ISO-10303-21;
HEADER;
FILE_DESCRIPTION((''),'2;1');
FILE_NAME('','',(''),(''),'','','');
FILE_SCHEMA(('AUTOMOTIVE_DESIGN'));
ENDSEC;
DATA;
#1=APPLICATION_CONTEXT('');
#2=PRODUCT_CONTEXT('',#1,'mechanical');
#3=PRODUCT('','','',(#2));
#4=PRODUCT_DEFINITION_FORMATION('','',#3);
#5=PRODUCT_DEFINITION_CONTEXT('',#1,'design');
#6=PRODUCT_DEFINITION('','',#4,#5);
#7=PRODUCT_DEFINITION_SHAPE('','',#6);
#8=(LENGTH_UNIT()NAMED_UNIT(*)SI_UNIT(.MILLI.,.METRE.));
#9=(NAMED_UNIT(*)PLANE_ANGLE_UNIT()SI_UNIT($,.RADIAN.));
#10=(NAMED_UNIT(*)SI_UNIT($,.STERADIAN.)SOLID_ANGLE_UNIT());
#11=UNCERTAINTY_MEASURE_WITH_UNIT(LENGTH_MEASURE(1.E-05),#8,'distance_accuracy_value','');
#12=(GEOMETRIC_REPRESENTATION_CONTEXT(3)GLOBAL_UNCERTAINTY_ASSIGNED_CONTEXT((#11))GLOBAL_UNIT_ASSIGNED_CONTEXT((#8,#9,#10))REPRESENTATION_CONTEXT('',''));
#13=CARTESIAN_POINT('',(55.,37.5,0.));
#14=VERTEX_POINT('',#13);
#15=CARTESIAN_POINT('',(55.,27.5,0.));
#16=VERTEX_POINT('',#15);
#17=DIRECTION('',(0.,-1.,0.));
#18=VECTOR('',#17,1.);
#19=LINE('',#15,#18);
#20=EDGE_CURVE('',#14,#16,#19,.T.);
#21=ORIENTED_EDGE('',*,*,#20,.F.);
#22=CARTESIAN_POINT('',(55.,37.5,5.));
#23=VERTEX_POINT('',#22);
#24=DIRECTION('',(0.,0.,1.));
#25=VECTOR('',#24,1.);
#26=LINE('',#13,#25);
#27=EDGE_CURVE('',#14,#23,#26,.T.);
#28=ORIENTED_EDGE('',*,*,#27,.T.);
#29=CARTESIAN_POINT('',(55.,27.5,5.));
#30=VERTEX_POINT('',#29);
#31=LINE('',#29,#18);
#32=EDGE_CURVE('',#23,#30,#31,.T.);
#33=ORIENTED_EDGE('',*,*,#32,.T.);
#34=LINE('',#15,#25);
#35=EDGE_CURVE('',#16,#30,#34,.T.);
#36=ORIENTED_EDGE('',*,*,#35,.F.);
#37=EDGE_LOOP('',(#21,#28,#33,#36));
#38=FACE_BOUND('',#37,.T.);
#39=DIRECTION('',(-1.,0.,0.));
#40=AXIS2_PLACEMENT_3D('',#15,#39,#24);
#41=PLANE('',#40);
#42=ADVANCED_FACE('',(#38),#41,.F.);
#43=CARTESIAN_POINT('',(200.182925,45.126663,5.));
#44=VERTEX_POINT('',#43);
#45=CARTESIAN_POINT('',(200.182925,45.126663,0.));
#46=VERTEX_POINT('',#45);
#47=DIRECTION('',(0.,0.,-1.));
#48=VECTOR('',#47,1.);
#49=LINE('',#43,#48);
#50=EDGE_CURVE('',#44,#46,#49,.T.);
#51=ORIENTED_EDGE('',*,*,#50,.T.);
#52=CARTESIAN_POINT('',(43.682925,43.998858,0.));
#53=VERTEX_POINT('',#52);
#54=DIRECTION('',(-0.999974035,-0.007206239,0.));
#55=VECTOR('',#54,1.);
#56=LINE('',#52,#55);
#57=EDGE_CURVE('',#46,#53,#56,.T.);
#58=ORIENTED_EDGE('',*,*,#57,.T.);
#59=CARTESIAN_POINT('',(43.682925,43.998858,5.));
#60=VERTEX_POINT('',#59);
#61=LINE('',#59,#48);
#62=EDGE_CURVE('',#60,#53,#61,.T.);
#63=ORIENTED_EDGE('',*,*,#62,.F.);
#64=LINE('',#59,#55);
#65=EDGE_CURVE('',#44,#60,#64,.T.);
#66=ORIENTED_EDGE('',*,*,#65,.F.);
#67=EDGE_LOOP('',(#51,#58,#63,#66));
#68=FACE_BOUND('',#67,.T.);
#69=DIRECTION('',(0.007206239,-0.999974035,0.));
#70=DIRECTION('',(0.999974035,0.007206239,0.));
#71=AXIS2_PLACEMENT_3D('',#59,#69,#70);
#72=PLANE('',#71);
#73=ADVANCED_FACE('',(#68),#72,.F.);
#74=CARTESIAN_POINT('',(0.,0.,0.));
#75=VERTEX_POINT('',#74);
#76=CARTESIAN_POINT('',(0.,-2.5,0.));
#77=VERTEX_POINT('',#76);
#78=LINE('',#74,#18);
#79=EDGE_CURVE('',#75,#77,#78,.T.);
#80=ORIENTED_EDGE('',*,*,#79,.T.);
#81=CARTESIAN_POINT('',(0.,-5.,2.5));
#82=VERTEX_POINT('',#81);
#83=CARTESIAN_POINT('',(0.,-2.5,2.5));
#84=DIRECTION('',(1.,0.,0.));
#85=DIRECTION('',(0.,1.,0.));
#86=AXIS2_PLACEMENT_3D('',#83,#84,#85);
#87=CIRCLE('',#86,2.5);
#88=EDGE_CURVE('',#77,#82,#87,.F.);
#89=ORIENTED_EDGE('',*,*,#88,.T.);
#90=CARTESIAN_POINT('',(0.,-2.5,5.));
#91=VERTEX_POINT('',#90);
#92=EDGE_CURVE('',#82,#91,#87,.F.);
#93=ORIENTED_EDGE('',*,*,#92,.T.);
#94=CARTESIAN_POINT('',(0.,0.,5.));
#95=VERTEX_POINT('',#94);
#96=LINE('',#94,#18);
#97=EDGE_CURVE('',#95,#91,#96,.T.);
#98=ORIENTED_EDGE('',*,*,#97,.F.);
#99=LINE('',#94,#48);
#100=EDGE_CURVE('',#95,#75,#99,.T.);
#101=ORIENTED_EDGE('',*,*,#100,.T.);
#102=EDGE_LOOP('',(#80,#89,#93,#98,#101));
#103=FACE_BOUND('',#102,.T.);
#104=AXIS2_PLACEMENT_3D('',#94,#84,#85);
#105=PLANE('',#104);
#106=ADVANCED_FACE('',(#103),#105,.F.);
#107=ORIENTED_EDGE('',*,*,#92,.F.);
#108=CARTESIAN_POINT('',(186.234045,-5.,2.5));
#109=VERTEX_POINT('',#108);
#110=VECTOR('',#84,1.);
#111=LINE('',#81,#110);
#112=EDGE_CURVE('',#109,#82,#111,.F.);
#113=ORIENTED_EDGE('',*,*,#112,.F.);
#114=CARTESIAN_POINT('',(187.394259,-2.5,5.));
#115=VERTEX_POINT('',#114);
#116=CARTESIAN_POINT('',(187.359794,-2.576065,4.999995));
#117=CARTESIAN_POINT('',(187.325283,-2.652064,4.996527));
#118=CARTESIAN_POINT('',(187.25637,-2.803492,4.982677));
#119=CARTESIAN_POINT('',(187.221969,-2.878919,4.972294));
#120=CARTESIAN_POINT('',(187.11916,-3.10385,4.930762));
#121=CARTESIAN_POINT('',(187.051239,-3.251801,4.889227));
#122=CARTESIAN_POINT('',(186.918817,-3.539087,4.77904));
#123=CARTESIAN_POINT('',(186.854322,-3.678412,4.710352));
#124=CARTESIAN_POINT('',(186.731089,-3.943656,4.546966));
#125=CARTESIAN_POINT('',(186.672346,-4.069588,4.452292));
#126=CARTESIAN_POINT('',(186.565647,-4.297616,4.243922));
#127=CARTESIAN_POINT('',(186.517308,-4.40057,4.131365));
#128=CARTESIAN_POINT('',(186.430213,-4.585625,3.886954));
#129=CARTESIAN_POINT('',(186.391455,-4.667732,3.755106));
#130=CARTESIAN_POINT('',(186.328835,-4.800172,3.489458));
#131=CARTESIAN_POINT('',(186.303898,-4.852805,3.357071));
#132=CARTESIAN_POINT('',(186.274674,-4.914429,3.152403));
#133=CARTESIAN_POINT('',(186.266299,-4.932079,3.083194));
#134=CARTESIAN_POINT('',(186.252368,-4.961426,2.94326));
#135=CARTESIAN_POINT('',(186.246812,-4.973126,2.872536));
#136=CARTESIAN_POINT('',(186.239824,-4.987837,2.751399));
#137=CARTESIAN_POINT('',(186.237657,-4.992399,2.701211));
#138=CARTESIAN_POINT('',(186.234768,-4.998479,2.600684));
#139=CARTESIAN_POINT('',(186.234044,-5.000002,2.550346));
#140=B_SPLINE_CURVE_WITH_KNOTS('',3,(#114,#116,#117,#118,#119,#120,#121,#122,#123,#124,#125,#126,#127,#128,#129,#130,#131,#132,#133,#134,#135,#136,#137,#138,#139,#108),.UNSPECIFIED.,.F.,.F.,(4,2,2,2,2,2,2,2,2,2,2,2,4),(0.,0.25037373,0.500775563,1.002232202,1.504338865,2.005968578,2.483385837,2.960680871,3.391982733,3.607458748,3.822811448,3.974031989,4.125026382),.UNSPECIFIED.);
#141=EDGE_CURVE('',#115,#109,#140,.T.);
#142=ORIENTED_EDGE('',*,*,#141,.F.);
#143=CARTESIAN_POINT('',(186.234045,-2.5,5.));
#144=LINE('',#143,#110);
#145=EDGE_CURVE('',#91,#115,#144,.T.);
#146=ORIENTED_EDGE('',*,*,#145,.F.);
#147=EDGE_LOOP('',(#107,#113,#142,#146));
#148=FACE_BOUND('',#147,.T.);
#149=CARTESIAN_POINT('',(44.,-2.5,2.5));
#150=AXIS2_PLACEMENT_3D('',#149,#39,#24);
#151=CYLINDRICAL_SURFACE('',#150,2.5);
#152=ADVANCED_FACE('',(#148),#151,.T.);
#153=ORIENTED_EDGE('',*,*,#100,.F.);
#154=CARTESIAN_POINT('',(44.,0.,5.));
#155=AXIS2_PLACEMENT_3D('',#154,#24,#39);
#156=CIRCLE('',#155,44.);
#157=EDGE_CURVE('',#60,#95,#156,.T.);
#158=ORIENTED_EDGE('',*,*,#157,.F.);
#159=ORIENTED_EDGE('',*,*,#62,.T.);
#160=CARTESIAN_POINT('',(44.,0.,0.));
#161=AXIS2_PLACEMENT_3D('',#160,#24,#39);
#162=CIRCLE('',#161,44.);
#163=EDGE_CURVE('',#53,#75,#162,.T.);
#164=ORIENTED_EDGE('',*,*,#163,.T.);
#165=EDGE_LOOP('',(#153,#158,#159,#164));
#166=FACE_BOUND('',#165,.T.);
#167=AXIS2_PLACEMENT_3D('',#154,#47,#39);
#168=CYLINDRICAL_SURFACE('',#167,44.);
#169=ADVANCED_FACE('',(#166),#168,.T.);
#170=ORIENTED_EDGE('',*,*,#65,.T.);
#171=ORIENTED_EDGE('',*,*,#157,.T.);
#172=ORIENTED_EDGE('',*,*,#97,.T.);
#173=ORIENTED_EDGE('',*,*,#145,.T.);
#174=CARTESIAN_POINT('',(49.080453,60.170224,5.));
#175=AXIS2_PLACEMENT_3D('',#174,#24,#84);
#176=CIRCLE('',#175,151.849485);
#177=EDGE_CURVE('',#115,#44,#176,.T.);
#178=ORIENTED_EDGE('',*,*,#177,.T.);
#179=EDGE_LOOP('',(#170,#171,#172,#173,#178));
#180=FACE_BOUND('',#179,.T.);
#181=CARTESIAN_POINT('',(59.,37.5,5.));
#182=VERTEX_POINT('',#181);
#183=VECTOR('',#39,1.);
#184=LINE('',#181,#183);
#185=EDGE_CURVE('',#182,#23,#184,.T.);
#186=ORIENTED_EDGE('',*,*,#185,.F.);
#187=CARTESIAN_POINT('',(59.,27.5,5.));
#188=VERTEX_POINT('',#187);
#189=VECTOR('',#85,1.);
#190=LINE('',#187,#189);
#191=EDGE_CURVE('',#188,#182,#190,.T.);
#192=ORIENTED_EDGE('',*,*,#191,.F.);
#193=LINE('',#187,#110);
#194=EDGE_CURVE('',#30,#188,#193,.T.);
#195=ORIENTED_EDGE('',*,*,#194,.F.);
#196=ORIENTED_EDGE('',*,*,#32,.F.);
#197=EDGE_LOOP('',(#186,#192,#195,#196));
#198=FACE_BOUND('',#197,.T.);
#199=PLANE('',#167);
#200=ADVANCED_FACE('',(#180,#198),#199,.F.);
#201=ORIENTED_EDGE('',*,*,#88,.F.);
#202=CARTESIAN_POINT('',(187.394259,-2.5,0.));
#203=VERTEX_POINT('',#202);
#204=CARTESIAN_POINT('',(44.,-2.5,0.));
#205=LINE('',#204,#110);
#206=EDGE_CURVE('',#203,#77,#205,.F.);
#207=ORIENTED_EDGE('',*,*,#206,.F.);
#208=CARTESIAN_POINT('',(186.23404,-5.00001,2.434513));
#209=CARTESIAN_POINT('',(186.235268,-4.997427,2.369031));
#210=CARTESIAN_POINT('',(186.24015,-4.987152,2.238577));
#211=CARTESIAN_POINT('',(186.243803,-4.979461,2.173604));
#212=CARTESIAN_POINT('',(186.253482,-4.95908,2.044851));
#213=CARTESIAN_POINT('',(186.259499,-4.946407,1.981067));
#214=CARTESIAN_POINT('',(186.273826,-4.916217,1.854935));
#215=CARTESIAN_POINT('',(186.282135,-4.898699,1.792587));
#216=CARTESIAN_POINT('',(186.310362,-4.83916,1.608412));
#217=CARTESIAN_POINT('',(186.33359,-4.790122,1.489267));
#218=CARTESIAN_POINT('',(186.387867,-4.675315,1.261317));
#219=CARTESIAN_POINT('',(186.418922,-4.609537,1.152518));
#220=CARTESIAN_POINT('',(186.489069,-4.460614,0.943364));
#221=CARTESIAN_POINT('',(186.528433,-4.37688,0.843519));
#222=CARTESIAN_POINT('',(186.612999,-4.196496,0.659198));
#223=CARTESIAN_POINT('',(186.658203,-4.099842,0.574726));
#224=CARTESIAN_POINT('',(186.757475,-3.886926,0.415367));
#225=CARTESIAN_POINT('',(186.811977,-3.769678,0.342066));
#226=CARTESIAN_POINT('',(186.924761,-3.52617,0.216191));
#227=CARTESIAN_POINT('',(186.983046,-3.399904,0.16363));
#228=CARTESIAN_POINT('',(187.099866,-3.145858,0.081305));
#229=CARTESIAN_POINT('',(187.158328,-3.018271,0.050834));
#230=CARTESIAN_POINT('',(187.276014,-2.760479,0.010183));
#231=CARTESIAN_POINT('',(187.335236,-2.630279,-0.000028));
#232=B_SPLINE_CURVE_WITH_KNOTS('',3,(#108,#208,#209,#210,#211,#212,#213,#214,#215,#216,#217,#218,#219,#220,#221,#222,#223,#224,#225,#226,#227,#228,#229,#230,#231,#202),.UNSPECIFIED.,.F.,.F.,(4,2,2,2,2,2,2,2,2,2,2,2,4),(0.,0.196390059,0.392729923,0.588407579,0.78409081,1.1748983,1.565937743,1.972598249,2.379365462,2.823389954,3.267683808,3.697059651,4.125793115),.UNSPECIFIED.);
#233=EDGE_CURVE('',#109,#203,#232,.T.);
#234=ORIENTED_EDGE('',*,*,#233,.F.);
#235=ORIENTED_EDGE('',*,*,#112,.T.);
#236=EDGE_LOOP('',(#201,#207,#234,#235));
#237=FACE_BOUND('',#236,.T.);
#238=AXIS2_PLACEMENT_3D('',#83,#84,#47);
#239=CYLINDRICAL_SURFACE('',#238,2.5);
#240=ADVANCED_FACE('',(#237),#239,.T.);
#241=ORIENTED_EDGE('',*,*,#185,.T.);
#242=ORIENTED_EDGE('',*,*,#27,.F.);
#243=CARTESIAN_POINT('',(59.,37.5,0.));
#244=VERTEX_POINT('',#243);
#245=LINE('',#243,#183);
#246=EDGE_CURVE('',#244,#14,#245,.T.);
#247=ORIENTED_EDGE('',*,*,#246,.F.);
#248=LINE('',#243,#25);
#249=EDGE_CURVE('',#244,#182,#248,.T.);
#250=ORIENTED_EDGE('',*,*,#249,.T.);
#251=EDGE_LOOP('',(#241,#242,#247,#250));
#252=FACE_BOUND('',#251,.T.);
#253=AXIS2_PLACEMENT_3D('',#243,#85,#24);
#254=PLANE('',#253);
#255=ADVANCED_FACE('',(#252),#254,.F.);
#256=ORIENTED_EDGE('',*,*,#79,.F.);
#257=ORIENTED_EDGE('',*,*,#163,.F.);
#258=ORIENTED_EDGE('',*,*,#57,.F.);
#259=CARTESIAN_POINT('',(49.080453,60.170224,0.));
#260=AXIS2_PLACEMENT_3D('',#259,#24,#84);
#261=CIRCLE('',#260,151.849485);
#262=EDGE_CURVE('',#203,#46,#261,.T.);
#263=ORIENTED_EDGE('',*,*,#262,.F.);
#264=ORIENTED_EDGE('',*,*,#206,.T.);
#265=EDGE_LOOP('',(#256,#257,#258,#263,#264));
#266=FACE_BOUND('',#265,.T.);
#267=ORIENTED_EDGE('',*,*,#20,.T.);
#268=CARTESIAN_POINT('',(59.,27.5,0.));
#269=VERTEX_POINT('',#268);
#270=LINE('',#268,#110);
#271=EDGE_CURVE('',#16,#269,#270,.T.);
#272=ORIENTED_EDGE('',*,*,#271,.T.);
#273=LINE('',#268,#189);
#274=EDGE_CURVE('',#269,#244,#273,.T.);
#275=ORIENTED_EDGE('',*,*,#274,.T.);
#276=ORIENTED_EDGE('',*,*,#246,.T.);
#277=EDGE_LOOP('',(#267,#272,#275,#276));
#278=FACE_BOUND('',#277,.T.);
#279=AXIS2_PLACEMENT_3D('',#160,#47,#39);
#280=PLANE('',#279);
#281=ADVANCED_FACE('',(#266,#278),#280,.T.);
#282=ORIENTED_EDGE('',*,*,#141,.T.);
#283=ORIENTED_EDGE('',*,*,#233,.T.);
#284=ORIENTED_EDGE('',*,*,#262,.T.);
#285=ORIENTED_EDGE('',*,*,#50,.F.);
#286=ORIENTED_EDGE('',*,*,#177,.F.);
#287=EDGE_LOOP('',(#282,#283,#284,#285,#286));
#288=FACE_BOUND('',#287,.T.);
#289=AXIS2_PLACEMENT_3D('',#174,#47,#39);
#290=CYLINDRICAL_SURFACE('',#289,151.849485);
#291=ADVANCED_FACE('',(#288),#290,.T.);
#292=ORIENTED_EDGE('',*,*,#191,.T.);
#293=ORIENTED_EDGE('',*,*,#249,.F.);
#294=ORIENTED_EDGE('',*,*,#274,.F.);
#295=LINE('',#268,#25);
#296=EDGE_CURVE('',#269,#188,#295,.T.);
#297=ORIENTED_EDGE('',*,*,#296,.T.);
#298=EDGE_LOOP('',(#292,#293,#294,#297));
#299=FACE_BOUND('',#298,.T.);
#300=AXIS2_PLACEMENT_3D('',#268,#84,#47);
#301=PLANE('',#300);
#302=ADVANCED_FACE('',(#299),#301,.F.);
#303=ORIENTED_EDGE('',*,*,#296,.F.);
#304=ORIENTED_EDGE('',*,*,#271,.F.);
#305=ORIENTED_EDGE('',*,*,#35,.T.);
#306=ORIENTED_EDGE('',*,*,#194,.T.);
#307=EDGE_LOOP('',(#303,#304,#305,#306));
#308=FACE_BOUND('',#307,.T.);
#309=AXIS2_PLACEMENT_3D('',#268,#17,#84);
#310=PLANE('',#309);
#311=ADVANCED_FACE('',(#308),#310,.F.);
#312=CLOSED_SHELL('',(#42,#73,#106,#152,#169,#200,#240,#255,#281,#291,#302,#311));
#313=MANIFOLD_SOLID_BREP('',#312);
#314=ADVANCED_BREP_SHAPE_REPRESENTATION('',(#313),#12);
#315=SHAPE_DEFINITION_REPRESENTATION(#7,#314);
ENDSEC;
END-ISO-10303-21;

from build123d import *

# Parameters (mm, degrees)
BOSS_EXTRU_1_DEPTH      = 5
ESQUISSE3_W             = 10
ESQUISSE3_H             = 3
ENL_V_MAT_EXTRU_1_DEPTH = 231.967242256
ENL_V_MAT_EXTRU_2_DEPTH = 231.967242256
ESQUISSE2_W             = 203.424903091
ESQUISSE2_H             = 131.549645995
ENL_V_MAT_EXTRU_3_DEPTH = 231.967242256
CONG_1_R                = 2.5
ESQUISSE5_W             = 4
ESQUISSE5_H             = 10
ENL_V_MAT_EXTRU_4_DEPTH = 206.267190359


with BuildPart() as part:
    # Esquisse1 → Boss.-Extru.1 (new body)
    with BuildSketch(Plane.XY):
        with BuildLine():
            Line((0, 0), (0, -25))
            Line((0, -25), (37.5, -25))
            Line((37.5, -25), (37.5, -95.5))
            Line((37.5, -95.5), (32.5, -95.5))
            Line((32.5, -95.5), (36.487358688, -115.098494092))
            Line((36.487358688, -115.098494092), (88.487358688, -115.098494092))
            Line((88.487358688, -115.098494092), (159.198036807, -44.387815974))
            ThreePointArc((159.198036807, -44.387815974), (187.146342861, -3.044299659), (200.182925478, 45.126663235))
            Line((200.182925478, 45.126663235), (43.682925478, 43.998857528))
            ThreePointArc((43.682925478, 43.998857528), (12.775400091, 31.000392909), (0, 0))
        make_face()
    extrude(amount=BOSS_EXTRU_1_DEPTH)

    # Esquisse3 → Enlèv. mat.-Extru.1 (cut, through all)
    with BuildSketch(Plane.XY.offset(5)):
        with Locations((5, -23.5)):
            Rectangle(ESQUISSE3_W, ESQUISSE3_H)
    extrude(amount=-ENL_V_MAT_EXTRU_1_DEPTH, mode=Mode.SUBTRACT)

    # Esquisse4 → Enlèv. mat.-Extru.2 (cut, through all)
    with BuildSketch(Plane.XY.offset(5)):
        Polygon((88.487358688, -105.098494092), (78.487358688, -105.098494092), (78.487358688, -111.098494092), (68.487358688, -115.098494092), (78.487358688, -115.098494092), (88.487358688, -115.098494092), (98.487358688, -105.098494092), align=None)
    extrude(amount=-ENL_V_MAT_EXTRU_2_DEPTH, mode=Mode.SUBTRACT)

    # Esquisse2 → Enlèv. mat.-Extru.3 (cut, through all)
    with BuildSketch(Plane.XY.offset(5)):
        with Locations((101.712451546, -70.774822998)):
            Rectangle(ESQUISSE2_W, ESQUISSE2_H)
    extrude(amount=-ENL_V_MAT_EXTRU_3_DEPTH, mode=Mode.SUBTRACT)

    # Congé1
    cong_1_edges = [part.edges().sort_by_distance(p)[0] for p in [
        (93.117022594, -5, 0),
        (93.117022594, -5, 5),
    ]]
    fillet(cong_1_edges, radius=CONG_1_R - 0.0001)  # a hair under: the kernel refuses the full size

    # Esquisse5 → Enlèv. mat.-Extru.4 (cut, through all)
    with BuildSketch(Plane.XY.offset(5)):
        with Locations((57, 32.5)):
            Rectangle(ESQUISSE5_W, ESQUISSE5_H)
    extrude(amount=-ENL_V_MAT_EXTRU_4_DEPTH, mode=Mode.SUBTRACT)


solid = part.part
